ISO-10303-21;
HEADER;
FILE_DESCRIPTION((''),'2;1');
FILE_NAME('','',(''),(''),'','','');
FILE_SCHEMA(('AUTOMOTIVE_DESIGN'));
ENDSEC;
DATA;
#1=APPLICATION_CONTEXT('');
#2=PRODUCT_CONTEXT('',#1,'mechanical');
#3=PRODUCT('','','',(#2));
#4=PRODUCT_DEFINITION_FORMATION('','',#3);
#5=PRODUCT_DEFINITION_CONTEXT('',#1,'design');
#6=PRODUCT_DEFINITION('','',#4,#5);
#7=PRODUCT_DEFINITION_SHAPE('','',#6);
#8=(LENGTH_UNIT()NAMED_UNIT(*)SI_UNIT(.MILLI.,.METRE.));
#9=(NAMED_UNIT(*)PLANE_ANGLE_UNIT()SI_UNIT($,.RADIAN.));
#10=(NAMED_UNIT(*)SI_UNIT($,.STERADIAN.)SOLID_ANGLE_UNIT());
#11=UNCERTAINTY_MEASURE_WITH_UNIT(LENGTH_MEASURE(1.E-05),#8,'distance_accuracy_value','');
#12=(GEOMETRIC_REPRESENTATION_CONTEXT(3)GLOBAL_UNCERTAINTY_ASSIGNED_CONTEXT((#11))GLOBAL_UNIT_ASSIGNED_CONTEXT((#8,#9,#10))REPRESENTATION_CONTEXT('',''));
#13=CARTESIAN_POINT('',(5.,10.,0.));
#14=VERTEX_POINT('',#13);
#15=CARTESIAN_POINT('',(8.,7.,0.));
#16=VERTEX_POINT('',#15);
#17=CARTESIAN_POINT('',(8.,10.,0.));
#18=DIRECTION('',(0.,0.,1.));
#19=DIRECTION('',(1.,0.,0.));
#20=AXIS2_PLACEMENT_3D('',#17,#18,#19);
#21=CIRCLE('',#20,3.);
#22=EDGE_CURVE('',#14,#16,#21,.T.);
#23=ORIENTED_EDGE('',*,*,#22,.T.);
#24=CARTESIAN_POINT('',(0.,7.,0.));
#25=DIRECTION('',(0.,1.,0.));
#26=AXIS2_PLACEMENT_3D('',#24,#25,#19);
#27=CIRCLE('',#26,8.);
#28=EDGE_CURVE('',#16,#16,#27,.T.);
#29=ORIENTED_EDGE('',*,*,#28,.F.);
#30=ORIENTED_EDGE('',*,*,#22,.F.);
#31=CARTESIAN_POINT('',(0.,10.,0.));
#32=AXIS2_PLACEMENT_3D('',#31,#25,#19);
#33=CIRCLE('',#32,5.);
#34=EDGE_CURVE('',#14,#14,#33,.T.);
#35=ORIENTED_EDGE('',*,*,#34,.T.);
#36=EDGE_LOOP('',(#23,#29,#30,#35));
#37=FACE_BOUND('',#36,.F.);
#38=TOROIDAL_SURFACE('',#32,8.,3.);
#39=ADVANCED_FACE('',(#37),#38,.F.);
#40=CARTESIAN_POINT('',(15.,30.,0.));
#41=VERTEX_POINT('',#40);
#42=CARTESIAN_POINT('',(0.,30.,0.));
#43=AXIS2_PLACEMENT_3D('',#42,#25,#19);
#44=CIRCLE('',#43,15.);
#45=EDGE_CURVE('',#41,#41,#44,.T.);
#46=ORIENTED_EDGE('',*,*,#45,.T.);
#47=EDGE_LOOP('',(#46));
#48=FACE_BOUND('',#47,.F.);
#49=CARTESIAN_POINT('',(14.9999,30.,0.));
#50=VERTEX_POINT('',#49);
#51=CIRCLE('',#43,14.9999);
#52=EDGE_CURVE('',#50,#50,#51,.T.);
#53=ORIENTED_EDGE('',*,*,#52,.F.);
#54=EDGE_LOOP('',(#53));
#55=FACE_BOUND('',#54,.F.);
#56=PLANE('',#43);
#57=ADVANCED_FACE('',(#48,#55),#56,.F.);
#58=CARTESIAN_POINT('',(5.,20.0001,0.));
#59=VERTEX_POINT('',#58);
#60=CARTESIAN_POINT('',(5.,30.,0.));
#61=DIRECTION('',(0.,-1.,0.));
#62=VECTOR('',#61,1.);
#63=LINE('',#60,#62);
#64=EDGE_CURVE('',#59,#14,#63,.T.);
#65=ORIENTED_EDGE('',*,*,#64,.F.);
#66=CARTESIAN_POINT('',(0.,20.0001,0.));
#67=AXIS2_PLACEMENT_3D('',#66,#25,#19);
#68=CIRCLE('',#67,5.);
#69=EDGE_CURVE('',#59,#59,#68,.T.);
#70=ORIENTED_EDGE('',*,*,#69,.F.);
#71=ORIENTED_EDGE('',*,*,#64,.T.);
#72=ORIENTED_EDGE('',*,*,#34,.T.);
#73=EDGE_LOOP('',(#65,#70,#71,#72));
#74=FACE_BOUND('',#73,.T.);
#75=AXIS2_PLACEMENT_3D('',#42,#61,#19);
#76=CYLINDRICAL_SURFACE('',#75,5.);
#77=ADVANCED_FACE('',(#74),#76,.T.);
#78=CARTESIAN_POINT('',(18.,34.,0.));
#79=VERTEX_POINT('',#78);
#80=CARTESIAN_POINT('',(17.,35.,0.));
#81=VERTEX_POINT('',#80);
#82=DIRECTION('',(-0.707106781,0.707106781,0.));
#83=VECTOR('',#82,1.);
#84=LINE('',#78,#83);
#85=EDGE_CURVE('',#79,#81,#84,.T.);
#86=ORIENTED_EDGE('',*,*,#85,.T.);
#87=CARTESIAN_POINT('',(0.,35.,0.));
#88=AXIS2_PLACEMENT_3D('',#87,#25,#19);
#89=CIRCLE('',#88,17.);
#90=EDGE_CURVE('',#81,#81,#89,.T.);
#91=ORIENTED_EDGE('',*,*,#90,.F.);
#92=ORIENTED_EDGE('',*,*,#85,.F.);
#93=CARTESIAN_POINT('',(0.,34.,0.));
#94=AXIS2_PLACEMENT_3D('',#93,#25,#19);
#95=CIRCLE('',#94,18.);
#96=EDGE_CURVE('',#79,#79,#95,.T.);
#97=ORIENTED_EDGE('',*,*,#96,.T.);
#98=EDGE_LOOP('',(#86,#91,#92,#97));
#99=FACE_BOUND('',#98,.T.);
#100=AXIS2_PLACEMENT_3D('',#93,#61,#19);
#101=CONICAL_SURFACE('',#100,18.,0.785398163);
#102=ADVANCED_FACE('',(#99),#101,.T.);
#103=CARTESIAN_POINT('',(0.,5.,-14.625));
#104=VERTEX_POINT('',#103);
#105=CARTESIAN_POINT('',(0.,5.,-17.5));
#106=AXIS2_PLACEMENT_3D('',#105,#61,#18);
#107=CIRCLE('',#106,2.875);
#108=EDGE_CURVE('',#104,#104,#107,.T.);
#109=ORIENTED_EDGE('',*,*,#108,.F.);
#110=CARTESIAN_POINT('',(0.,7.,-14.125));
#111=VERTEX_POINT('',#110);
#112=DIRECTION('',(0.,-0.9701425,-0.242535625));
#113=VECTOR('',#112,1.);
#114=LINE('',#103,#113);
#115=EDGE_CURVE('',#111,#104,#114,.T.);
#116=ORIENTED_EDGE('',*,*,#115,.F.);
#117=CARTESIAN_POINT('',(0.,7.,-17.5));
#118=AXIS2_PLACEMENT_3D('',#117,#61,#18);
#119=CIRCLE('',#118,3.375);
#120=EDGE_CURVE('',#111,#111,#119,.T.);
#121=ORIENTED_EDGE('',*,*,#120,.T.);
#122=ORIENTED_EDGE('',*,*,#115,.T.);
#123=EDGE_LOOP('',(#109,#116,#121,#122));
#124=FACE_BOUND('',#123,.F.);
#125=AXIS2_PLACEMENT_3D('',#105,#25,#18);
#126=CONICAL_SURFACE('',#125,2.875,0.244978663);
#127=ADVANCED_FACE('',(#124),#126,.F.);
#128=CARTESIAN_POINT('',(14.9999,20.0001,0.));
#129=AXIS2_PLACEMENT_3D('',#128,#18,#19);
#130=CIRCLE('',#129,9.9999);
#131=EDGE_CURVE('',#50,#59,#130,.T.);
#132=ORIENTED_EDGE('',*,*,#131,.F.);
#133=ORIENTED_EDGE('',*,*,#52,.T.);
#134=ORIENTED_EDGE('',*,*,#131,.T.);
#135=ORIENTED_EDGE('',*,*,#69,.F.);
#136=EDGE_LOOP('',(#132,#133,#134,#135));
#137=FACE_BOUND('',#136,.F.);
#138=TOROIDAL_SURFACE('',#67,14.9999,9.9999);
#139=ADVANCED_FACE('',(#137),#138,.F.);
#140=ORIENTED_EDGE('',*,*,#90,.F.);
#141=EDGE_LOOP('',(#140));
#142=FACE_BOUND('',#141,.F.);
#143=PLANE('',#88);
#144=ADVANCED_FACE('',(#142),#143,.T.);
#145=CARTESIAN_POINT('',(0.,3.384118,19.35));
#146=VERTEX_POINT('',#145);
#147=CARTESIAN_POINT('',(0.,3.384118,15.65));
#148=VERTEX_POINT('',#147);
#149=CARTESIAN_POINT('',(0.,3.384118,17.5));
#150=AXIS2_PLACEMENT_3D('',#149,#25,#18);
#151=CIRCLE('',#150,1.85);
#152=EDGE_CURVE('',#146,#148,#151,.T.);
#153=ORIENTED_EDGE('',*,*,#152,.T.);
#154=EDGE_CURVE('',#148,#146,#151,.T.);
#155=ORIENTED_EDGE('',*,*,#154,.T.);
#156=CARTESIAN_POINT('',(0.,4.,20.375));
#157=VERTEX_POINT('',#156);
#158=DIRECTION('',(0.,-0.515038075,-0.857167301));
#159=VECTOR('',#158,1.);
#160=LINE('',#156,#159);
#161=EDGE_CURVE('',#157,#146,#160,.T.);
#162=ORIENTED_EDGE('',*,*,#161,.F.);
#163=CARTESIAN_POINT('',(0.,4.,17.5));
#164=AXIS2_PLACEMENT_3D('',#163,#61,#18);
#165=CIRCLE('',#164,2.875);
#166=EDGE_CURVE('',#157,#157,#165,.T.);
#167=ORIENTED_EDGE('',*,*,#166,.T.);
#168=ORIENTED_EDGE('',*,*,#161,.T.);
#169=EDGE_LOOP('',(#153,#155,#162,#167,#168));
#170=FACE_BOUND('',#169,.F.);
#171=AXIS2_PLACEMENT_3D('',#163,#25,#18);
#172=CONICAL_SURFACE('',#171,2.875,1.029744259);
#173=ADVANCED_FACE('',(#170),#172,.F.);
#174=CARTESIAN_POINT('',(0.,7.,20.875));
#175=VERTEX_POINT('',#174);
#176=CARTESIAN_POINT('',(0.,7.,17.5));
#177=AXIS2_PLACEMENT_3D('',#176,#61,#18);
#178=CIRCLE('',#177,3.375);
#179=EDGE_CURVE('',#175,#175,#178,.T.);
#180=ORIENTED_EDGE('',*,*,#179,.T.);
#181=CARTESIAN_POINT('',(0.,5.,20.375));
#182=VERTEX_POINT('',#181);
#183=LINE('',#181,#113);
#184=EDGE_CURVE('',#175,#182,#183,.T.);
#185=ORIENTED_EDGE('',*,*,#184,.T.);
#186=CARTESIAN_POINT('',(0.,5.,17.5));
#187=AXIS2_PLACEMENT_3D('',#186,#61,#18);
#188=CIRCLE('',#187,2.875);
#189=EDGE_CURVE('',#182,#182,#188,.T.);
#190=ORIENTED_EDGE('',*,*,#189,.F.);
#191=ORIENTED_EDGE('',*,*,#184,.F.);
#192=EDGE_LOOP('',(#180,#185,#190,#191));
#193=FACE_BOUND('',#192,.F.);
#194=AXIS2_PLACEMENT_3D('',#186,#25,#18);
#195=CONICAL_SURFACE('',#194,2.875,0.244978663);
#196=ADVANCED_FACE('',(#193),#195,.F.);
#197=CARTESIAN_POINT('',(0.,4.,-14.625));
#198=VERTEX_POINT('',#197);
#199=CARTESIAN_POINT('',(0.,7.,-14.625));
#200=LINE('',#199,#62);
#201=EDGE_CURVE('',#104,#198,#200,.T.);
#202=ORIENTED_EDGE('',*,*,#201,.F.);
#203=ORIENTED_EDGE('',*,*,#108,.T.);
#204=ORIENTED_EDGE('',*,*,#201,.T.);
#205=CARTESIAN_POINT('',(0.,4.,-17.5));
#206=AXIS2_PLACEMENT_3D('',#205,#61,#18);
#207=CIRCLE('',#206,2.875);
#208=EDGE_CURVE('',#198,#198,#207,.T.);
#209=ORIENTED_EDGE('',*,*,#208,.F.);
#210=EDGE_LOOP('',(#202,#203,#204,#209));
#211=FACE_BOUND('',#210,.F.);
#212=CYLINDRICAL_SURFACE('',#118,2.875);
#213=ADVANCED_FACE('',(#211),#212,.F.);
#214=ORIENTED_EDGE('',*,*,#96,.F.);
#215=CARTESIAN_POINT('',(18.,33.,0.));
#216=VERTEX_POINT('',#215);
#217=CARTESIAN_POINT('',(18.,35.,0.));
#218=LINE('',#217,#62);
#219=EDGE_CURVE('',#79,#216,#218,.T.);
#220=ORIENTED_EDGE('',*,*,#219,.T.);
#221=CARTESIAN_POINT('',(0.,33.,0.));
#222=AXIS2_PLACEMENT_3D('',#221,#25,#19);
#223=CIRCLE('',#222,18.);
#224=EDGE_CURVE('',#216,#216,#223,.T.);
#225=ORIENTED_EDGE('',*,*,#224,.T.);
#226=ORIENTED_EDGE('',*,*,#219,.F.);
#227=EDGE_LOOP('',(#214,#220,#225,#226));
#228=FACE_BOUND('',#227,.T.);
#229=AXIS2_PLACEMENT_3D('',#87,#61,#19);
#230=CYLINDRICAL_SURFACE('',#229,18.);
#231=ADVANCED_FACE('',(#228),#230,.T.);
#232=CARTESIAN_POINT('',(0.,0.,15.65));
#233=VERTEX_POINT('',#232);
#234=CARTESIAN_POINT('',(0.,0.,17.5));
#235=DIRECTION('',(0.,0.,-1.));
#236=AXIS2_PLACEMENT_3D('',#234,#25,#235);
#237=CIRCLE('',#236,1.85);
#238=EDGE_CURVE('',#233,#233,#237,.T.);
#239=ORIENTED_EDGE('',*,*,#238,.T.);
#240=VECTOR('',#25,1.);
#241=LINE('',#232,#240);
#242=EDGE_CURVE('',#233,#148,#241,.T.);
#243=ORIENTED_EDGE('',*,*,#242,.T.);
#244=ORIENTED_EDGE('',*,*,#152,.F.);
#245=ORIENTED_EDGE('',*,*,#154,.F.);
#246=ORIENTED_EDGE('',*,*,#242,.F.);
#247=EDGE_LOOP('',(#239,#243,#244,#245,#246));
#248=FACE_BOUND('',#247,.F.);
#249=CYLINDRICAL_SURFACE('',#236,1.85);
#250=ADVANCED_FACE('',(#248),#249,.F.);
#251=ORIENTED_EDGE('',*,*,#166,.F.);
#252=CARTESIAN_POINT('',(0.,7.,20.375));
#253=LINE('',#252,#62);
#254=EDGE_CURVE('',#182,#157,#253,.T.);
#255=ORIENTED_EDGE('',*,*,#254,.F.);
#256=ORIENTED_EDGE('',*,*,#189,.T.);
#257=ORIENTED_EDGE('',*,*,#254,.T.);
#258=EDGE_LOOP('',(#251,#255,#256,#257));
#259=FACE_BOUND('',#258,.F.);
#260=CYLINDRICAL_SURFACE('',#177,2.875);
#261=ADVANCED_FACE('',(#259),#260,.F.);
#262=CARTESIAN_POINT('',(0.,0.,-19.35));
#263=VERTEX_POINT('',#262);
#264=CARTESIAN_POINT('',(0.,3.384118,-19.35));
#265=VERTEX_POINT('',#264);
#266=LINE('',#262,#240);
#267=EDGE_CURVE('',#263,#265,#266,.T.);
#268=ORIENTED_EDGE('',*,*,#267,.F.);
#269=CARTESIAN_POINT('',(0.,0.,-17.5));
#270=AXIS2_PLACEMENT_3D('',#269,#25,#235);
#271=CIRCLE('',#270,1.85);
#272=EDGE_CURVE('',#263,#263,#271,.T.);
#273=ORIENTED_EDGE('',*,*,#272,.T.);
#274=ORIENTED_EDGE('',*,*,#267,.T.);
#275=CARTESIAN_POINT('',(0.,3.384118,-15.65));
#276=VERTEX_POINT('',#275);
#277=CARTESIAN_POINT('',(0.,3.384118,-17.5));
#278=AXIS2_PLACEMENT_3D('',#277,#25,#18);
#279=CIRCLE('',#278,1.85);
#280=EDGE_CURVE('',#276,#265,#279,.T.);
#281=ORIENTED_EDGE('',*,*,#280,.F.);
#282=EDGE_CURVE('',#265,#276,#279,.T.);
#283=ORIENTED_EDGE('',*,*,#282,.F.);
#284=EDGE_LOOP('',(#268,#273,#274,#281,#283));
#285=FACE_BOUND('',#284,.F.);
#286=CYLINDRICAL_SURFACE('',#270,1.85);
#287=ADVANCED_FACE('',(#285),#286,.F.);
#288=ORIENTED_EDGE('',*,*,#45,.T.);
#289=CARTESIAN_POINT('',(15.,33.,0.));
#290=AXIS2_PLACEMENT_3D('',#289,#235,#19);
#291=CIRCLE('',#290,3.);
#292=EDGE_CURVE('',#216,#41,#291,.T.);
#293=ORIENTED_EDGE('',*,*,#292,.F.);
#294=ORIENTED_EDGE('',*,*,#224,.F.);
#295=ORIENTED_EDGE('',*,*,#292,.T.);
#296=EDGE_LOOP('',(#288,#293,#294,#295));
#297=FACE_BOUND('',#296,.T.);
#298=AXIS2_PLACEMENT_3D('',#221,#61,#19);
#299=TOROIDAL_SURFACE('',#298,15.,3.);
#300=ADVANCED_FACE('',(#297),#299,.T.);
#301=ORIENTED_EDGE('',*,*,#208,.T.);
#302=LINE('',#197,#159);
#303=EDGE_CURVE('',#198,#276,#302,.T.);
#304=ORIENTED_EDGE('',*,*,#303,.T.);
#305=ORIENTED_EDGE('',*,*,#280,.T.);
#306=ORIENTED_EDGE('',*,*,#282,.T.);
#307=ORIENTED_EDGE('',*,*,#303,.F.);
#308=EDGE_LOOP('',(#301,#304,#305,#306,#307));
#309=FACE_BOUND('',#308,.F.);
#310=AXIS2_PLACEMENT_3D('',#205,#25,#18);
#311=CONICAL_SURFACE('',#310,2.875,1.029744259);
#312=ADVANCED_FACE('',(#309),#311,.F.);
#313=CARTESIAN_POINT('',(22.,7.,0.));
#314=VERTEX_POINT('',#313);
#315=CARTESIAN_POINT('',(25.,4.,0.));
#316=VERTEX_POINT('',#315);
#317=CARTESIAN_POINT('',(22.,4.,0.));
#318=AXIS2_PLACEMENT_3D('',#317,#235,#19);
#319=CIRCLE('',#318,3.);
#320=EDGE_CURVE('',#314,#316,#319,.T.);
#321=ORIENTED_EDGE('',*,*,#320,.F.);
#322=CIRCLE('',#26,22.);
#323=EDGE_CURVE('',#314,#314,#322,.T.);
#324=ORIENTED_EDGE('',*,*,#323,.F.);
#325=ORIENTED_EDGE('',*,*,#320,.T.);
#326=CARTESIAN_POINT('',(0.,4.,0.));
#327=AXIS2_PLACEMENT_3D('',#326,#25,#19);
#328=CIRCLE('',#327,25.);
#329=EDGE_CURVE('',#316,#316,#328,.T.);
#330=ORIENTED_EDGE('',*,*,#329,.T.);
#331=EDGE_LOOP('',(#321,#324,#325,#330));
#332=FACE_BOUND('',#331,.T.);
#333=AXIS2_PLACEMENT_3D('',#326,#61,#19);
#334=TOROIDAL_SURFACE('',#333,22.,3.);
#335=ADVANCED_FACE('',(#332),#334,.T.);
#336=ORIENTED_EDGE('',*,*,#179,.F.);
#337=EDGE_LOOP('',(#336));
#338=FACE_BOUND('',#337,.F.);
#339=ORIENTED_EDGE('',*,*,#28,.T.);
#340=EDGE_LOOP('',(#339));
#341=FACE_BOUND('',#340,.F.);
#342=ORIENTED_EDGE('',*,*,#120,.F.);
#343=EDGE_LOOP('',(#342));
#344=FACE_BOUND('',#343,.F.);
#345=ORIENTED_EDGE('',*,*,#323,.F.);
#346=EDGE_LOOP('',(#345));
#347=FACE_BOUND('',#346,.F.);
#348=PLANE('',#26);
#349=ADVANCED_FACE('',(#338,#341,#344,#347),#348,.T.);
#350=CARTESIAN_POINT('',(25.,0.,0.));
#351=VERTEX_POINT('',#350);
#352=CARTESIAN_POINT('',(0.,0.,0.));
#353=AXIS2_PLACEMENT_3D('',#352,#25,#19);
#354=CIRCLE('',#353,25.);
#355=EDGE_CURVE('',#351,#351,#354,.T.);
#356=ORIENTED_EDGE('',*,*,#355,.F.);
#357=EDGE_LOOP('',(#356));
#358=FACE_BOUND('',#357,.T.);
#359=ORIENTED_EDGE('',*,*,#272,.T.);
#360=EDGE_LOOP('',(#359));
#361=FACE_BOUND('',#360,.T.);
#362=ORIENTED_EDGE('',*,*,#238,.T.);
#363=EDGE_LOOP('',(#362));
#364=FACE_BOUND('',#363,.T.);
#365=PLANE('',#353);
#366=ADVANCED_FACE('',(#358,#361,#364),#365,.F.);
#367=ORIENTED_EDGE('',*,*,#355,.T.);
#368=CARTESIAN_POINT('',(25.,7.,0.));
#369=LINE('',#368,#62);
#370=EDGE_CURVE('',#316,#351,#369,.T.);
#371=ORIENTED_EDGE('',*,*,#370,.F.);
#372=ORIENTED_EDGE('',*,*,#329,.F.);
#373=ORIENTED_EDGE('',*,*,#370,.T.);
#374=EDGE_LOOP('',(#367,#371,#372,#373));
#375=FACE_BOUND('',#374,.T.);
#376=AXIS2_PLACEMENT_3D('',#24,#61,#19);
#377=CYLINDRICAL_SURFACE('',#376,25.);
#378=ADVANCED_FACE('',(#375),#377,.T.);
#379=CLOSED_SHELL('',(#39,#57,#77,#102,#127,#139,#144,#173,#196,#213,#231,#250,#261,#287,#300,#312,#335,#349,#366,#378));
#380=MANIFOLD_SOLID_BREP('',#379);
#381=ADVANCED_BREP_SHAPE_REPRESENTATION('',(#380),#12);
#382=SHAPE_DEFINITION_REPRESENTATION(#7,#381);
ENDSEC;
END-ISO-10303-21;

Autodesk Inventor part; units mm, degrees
ref_plane "YZ Plane" through (0, 0, 0) normal (1, 0, 0) x (0, 1, 0)
ref_plane "XZ Plane" through (0, 0, 0) normal (0, 1, 0) x (-1, 0, 0)
ref_plane "XY Plane" through (0, 0, 0) normal (0, 0, 1) x (1, 0, 0)
sketch "Sketch2" plane through (0, 0, 0) normal (0, 0, 1) x (1, 0, 0)
  line L0 (0, 0) -> (25, 0)
  line L1 (0, 0) -> (0, 35)
  line L2 (0, 35) -> (18, 35)
  line L3 (18, 35) -> (18, 30)
  line L4 (18, 30) -> (5, 30)
  line L5 (5, 30) -> (5, 7)
  line L6 (5, 7) -> (25, 7)
  line L7 (25, 7) -> (25, 0)
  dimension "d3" = 25
  dimension "d4" = 35
  dimension "d5" = 18
  dimension "d6" = 5
  dimension "d23" = 7
  dimension "d24" = 23
  dimension "d26" = 5
revolve "Revolution1" add sketch "Sketch2" angle 360 about axis through (0, 0, 0) along (0, 1, 0)
fillet "Fillet1" radius 3 3 edges at (-5, 7, 0) (-18, 30, 0) (-25, 7, 0)
chamfer "Chamfer1" distance 1 angle 45 1 edges at (-18, 35, 0)
sketch "Sketch3" plane through (0, 0, 0) normal (0, -1, 0) x (1, 0, 0)
  line L0 (0, 0) -> (0, -17.5)
  line L1 (0, 0) -> (0, 17.5)
  dimension "d14" = 17.5
  dimension "d15" = 17.5
hole "Hole1" at (0, 0, 17.5) at (0, 0, -17.5) direction (0, 1, 0) diameter 3.7 depth 7
fillet "Fillet2" radius 10 1 edges at (-5, 30, 0)
sketch "Sketch4" plane through (0, 7, 0) normal (0, 1, 0) x (1, 0, 0)
  circle A0 centre (0, 17.5) radius 1.85 projected
  circle A1 centre (0, -17.5) radius 1.85 projected
  circle A2 centre (0, -17.5) radius 1.85 projected
  circle A3 centre (0, -17.5) radius 1.85 projected
  point P0 (0, 0)
hole "Hole2" at (0, 7, 17.5) at (0, 7, -17.5) direction (0, -1, 0) diameter 5.75 depth 3 tip angle 118
chamfer "Chamfer2" distance 0.5 distance2 2 1 edges at (0, 7, 14.625) measured on face at (-6.4693, 7, 13.5188)
chamfer "Chamfer3" distance 0.5 distance2 2 1 edges at (0, 7, -20.375) measured on face at (6.4693, 7, -13.5188)
sketch "Sketch5" plane through (0, 0, 0) normal (0, -1, 0) x (1, 0, 0)
  line L0 (-10, -10) -> (-10, 10)
  line L1 (-10, 10) -> (10, 10)
  line L2 (10, 10) -> (10, -10)
  line L3 (10, -10) -> (-10, -10)
  line L4 (-10, -10) -> (10, 10) construction
  line L5 (-10, 10) -> (10, -10) construction
  point P0 (0, 0)
  dimension "d34" = 20
  dimension "d35" = 20
extrude "Extrusion2" [suppressed]
sketch "Sketch7" plane through (0, 0, 0) normal (0, -1, 0) x (1, 0, 0)
  line L0 (-26, -7.75) -> (-10, -7.75)
  line L1 (-10, -7.75) -> (-10, 7.75)
  line L2 (-10, 7.75) -> (-26, 7.75)
  line L3 (-26, 7.75) -> (-26, -7.75)
  circle A0 centre (0, 0) radius 18 projected
  line L4 (-26, -7.75) -> (-10, 7.75) construction
  line L5 (-10, -7.75) -> (-26, 7.75) construction
  point P0 (-18, 0)
  dimension "d44" = 15.5
extrude "Extrusion3" [suppressed]
sketch "Sketch8" plane through (-10, 0, 10) normal (0, -1, 0) x (1, 0, 0)
  arc A0 (35, -10) -> (35, -10) centre (10, -10) ccw projected
  line L0 (-12.5073, 0.8822) -> (-22.2437, 0.8822)
  line L1 (-22.2437, 0.8822) -> (-22.2437, -21.0128)
  line L2 (-22.2437, -21.0128) -> (-12.5073, -21.0128)
  line L3 (-12.5073, -21.0128) -> (-12.4075, -21.0862)
  arc A1 (-12.5073, 0.8822) -> (-12.4075, -21.0862) centre (10, -10) ccw
  point P0 (-13.7684, -17.75)
  point P1 (-13.7684, -2.25)
extrude "Extrusion4" [suppressed]
chamfer "Chamfer4" [suppressed]
fillet "Fillet3" [suppressed]
properties part number "holding_socket"
